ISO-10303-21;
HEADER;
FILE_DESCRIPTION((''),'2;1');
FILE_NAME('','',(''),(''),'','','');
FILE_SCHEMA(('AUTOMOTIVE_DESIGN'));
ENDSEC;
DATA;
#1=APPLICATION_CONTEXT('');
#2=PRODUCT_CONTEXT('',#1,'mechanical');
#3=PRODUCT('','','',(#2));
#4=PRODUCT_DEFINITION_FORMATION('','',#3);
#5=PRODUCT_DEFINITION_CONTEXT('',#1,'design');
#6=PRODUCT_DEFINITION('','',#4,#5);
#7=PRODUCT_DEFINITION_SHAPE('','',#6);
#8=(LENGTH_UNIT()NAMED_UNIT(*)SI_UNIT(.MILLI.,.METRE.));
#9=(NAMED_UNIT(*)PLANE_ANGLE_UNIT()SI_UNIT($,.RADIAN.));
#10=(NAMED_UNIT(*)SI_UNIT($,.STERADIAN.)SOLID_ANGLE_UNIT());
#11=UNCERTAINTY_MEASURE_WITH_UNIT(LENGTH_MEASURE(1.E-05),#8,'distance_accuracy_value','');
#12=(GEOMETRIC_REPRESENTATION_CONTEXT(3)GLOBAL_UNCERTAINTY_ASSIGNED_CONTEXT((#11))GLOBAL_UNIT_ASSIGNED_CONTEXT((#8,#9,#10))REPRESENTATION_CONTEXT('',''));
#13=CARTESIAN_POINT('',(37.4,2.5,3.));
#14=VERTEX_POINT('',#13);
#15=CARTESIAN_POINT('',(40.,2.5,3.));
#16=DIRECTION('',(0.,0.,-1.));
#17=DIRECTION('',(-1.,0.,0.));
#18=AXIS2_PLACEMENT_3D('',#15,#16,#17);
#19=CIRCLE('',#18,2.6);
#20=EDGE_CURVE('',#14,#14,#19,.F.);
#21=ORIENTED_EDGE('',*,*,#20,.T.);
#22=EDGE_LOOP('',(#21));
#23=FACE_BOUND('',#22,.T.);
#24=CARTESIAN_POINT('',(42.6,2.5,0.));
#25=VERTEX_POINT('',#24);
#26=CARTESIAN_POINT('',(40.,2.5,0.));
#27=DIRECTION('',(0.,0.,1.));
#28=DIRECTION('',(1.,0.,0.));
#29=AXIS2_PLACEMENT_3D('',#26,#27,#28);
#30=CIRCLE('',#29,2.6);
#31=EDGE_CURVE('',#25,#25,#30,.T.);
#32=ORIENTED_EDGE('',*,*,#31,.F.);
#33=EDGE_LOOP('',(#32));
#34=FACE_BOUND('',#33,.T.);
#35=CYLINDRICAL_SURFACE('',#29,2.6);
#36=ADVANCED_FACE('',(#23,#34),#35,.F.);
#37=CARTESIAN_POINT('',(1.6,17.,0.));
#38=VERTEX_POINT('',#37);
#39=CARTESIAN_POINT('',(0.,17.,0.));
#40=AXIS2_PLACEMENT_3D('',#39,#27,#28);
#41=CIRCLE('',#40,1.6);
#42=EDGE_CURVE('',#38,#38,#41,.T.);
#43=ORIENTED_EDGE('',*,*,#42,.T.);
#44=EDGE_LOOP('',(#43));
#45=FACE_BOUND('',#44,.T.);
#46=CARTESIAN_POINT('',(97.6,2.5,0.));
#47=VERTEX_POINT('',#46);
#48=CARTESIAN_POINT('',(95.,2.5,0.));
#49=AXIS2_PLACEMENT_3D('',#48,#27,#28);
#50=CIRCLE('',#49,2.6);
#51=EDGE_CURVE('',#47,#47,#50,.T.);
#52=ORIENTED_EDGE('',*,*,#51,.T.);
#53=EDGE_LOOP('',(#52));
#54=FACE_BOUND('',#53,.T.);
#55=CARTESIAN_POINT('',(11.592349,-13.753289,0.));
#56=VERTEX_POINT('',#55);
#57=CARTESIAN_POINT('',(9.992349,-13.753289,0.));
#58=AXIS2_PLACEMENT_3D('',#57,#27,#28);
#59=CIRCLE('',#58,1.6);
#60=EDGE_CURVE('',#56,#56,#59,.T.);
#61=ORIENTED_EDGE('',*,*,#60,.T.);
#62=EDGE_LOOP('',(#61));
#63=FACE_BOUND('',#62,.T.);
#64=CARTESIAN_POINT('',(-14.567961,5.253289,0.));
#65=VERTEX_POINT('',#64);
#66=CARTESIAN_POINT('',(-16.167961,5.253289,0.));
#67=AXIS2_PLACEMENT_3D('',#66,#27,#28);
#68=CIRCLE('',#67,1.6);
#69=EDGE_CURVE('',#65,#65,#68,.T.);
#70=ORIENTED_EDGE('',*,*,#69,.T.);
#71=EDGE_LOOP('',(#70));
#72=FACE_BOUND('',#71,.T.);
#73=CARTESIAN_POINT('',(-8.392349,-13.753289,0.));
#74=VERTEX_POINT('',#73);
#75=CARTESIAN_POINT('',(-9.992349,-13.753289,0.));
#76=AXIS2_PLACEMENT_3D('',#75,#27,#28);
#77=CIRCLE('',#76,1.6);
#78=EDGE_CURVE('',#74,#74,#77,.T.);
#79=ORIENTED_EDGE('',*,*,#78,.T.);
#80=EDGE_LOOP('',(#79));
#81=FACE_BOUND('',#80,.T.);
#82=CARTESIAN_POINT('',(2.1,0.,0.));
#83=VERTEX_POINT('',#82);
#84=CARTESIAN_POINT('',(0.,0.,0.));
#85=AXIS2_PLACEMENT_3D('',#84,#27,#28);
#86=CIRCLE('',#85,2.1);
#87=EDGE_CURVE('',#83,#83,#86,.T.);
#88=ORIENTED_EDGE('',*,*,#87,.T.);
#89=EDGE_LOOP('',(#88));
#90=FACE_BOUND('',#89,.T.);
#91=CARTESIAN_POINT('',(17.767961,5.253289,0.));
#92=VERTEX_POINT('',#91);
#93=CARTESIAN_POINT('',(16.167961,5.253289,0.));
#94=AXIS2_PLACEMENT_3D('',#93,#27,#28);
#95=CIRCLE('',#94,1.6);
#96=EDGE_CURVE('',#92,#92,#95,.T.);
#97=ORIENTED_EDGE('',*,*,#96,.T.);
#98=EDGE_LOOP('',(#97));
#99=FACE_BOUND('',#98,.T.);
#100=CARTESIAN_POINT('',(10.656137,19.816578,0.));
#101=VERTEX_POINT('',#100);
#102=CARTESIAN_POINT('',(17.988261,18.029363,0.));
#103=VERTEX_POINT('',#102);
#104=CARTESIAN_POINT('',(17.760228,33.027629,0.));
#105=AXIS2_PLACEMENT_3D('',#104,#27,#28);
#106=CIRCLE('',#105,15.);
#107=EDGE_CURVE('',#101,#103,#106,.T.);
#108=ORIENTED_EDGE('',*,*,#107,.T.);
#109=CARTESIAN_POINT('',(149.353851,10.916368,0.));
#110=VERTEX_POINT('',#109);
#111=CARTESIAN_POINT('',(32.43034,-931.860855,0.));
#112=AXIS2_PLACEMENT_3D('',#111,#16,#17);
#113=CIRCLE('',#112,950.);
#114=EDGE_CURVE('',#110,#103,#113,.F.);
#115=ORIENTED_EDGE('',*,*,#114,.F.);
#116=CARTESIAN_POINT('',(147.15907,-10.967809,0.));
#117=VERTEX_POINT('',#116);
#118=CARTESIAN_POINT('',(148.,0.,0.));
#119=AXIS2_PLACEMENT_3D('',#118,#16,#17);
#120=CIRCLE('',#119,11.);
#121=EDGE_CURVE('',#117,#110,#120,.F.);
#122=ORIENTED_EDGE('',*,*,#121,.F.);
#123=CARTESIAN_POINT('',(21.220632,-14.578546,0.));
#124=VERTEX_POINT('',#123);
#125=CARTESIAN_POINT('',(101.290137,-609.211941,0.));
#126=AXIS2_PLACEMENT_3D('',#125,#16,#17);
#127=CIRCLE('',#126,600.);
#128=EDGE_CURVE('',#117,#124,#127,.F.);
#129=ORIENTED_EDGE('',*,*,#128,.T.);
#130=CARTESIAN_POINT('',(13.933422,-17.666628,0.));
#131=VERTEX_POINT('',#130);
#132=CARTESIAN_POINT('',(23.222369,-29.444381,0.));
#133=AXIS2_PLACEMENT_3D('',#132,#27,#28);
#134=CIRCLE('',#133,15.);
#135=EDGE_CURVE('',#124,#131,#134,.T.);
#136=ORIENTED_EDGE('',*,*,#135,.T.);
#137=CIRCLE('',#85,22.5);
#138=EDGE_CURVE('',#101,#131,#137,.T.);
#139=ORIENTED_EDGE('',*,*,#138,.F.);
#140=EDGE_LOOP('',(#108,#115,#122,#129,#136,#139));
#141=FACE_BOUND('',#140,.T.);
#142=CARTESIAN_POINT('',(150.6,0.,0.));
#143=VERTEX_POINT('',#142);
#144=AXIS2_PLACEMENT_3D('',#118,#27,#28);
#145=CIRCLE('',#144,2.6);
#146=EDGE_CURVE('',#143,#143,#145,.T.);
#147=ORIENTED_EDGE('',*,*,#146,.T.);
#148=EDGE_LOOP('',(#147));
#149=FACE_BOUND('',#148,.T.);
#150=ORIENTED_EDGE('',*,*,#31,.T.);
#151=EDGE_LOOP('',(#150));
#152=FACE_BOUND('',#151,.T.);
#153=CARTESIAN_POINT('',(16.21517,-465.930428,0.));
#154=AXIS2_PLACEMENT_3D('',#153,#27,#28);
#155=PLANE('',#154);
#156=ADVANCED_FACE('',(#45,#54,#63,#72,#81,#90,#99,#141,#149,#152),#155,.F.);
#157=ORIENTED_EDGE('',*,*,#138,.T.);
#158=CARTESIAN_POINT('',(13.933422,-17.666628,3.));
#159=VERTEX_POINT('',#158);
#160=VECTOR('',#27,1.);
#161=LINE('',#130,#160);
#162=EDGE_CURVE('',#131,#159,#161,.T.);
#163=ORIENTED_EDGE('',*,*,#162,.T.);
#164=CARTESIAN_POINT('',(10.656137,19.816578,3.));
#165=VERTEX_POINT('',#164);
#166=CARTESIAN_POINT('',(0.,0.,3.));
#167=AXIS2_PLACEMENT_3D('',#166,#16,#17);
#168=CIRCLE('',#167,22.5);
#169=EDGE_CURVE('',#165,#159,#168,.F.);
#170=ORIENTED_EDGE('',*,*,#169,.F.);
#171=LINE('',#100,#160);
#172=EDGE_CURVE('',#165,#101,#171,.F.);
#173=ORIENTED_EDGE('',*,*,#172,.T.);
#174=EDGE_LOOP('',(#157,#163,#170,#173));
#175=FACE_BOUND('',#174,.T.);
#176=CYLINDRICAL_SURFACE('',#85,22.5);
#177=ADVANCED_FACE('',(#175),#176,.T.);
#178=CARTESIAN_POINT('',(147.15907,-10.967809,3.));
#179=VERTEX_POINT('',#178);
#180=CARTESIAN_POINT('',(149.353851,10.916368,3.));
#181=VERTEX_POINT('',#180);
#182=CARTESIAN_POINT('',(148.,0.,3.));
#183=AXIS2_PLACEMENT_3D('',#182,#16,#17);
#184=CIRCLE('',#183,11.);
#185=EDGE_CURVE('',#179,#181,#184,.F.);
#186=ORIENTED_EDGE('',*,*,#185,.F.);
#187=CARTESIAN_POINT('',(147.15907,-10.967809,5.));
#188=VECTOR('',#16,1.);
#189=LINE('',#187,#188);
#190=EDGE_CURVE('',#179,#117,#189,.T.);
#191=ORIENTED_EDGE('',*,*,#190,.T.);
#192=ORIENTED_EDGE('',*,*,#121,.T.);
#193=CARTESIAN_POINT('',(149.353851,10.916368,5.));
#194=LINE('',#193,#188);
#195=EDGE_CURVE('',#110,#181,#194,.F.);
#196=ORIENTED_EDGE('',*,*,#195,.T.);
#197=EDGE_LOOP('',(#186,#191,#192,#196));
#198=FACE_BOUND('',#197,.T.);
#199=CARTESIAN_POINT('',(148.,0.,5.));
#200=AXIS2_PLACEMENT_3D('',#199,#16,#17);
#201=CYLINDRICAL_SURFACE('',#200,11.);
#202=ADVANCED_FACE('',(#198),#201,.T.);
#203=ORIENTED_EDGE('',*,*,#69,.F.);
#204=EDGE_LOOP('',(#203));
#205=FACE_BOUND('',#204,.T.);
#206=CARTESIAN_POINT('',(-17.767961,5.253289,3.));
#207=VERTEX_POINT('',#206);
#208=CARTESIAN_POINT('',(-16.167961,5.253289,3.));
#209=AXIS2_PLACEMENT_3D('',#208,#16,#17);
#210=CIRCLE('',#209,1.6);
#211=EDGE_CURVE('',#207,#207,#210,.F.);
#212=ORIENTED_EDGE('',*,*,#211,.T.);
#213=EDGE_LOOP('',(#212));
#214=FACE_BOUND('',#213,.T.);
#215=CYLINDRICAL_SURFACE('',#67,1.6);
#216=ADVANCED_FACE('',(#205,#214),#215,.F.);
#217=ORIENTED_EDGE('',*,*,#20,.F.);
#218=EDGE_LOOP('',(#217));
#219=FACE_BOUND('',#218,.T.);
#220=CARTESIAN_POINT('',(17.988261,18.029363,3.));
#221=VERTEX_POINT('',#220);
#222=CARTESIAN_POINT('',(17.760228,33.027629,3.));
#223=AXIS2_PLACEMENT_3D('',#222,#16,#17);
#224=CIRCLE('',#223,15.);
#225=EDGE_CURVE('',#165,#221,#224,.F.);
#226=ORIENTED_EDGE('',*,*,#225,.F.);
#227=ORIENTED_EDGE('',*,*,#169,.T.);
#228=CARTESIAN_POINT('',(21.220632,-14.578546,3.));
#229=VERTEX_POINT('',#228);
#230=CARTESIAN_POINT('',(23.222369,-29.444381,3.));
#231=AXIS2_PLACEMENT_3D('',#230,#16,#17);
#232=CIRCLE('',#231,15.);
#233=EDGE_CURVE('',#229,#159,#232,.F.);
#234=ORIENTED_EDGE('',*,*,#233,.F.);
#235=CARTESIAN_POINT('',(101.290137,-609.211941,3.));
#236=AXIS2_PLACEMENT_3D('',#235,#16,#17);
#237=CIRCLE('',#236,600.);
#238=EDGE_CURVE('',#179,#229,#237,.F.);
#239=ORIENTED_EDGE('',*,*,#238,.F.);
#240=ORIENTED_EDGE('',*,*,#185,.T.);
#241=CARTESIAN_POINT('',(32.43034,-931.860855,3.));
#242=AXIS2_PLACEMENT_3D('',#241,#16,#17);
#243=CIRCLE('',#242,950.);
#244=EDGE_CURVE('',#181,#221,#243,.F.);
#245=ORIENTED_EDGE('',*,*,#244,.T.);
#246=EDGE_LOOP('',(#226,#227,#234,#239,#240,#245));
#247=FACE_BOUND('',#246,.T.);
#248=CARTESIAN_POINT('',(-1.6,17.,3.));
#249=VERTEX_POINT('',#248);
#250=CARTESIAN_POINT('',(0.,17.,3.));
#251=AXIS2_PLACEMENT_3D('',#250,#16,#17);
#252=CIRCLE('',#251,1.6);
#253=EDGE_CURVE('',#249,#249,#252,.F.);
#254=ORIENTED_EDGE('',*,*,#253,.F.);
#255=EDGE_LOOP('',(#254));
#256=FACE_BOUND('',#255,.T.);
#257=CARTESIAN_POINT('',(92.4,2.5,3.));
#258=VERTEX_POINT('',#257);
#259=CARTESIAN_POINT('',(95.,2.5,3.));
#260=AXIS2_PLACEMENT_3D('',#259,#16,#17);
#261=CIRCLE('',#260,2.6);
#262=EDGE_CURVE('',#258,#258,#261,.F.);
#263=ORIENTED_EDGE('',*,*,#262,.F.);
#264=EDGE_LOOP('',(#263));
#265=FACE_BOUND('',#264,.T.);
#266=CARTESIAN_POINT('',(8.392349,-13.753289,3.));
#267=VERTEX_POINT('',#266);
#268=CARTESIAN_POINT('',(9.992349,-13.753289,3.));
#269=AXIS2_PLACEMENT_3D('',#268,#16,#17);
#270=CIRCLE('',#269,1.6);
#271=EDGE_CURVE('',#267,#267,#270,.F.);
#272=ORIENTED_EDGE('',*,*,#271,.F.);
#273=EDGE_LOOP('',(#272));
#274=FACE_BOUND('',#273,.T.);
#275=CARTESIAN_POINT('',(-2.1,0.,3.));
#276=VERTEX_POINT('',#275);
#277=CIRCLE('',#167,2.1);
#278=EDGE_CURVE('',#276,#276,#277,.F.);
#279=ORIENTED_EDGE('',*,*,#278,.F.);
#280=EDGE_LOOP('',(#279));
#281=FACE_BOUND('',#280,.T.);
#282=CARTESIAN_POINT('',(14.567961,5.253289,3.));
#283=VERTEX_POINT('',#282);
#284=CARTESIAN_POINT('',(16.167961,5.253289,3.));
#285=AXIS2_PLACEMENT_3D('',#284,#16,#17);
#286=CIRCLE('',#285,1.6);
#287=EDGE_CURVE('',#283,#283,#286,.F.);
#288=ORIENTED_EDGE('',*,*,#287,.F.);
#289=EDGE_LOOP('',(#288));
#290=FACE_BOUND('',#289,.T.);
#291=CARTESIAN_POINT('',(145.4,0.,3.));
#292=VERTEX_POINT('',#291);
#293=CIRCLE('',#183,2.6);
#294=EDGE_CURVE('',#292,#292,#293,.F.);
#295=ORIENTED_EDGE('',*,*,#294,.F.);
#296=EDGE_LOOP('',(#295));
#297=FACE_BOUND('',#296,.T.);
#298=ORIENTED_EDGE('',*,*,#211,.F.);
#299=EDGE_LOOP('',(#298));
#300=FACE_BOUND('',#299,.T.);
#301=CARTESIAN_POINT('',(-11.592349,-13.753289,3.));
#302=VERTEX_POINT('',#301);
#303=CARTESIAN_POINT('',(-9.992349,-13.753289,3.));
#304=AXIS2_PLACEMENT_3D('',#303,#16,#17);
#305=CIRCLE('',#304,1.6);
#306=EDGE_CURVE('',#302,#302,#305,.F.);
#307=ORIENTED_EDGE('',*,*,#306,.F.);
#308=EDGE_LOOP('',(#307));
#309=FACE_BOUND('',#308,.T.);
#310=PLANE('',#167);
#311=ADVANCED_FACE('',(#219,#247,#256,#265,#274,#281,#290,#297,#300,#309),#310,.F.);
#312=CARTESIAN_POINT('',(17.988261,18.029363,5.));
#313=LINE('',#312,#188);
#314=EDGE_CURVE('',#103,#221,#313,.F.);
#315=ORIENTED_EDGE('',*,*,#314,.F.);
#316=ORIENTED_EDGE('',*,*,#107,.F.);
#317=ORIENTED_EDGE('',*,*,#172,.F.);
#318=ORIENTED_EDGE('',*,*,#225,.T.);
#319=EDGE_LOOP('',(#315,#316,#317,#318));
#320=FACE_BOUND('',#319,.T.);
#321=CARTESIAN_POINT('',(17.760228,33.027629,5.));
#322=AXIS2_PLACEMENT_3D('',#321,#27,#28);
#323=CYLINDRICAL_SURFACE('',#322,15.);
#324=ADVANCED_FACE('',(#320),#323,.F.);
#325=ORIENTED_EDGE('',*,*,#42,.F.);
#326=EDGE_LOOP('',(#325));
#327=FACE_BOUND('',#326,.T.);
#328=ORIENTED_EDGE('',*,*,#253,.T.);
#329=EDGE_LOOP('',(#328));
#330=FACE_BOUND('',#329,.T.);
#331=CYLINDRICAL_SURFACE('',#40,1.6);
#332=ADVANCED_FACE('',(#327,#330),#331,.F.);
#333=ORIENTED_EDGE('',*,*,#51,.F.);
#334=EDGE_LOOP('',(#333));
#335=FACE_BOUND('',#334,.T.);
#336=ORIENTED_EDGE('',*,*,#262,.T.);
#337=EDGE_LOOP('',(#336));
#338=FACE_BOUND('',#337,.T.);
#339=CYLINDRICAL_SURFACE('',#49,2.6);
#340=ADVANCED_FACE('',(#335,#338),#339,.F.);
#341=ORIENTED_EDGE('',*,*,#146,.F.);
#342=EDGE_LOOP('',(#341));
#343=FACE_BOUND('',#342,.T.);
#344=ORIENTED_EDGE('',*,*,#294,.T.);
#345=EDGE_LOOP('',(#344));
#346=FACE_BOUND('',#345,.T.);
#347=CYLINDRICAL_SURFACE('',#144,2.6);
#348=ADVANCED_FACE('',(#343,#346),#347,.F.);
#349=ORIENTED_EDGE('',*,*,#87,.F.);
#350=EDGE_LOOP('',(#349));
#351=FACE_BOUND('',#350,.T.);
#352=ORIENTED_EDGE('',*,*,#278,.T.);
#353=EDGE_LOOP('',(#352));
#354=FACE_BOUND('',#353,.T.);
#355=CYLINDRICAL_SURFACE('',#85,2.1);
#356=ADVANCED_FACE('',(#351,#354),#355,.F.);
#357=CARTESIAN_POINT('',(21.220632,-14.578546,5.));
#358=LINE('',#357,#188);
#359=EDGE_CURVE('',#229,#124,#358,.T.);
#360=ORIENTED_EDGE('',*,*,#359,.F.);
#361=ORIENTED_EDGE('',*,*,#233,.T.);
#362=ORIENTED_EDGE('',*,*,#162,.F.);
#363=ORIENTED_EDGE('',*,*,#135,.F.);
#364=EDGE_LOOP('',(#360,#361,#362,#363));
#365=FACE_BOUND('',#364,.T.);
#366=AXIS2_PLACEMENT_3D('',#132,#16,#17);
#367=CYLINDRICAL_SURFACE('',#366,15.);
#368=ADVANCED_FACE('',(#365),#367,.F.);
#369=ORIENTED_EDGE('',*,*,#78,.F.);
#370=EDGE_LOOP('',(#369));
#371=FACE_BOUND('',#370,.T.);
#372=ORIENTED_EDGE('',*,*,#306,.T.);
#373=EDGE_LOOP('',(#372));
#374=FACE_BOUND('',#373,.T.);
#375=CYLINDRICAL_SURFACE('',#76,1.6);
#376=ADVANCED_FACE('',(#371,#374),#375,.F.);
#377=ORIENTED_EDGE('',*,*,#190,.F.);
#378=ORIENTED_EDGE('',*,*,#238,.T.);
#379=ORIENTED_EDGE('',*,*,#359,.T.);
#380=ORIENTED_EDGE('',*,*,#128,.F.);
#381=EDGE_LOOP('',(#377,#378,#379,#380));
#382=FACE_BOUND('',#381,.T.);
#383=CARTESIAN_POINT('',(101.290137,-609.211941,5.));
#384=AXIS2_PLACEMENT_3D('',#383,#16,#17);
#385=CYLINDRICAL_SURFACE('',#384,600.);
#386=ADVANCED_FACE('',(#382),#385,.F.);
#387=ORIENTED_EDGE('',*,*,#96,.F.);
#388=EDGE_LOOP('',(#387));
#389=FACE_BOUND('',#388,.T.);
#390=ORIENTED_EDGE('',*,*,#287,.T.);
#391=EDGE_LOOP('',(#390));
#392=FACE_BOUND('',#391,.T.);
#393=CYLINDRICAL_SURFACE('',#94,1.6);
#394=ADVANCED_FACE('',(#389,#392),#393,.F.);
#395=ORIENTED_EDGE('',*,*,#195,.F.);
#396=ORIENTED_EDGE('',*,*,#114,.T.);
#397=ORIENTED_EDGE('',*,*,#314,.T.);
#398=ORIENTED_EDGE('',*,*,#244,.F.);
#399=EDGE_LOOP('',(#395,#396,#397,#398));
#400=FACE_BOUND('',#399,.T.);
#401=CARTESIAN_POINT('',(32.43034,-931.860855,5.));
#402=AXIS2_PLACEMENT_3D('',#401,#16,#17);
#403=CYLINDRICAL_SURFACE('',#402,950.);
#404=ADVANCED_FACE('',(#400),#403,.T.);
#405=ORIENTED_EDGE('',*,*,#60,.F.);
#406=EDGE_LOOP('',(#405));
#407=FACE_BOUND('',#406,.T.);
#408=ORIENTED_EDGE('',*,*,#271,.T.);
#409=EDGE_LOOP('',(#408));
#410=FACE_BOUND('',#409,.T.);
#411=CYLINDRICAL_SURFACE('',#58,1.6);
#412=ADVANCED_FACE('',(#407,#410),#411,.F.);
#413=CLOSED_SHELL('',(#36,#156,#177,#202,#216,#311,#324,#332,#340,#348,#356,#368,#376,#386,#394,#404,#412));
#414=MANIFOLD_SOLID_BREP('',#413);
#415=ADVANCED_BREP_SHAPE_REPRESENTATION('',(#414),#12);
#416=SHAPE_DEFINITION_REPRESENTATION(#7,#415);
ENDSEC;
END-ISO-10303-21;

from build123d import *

# Parameters (mm, degrees)
BOSS_EXTRUDE1_START     = -5
BOSS_EXTRUDE1_OUTLINE_R = 1.925
BOSS_EXTRUDE1_DEPTH     = 5
SKETCH4_R               = 1.6
CUT_EXTRUDE2_DEPTH      = 161.661912101
FILLET1_R               = 15
SKETCH5_R               = 2.1
SKETCH5_R_2             = 2.6
CUT_EXTRUDE4_DEPTH      = 161.661912218
SKETCH6_W               = 233.09675901
SKETCH6_H               = 87.107773224
CUT_EXTRUDE5_DEPTH      = 2


with BuildPart() as part:
    # Boss-Extrude1: read off the stored shape, not the designer's step
    # Boss-Extrude1 outline → Boss-Extrude1 (new body)
    with BuildSketch(Plane.XY.offset(5).offset(BOSS_EXTRUDE1_START)):
        with BuildLine():
            ThreePointArc((149.353851183, 10.916367847), (81.584978704, 16.866619507), (13.564040933, 17.951790818))
            ThreePointArc((13.564040933, 17.951790818), (-22.408339146, -2.028875729), (16.567779435, -15.223622585))
            ThreePointArc((16.567779435, -15.223622585), (81.747231754, -9.530296146), (147.159069574, -10.96780908))
            ThreePointArc((147.159069574, -10.96780908), (158.945093507, -1.097692183), (149.353851183, 10.916367847))
        make_face()
        with Locations((40, 2.5)):
            Circle(BOSS_EXTRUDE1_OUTLINE_R, mode=Mode.SUBTRACT)
        with Locations((95, 2.5)):
            Circle(BOSS_EXTRUDE1_OUTLINE_R, mode=Mode.SUBTRACT)
    extrude(amount=BOSS_EXTRUDE1_DEPTH)

    # Sketch4 → Cut-Extrude2 (cut, through all)
    with BuildSketch(Plane.XY.offset(5)):
        with Locations((0, 17)):
            Circle(SKETCH4_R)
        with Locations((16.167960777, 5.253288904)):
            Circle(SKETCH4_R)
        with Locations((9.992349289, -13.753288904)):
            Circle(SKETCH4_R)
        with Locations((-9.992349289, -13.753288904)):
            Circle(SKETCH4_R)
        with Locations((-16.167960777, 5.253288904)):
            Circle(SKETCH4_R)
    extrude(amount=-CUT_EXTRUDE2_DEPTH, mode=Mode.SUBTRACT)

    # Fillet1
    fillet1_edges = [part.edges().sort_by_distance(p)[0] for p in [
        (16.567779435, -15.223622585, 2.5),
        (13.564040933, 17.951790818, 2.5),
    ]]
    fillet(fillet1_edges, radius=FILLET1_R)

    # Sketch5 → Cut-Extrude4 (cut, through all)
    with BuildSketch(Plane.XY.offset(5)):
        Circle(SKETCH5_R)
        with Locations((148, 0)):
            Circle(SKETCH5_R_2)
        with Locations((95, 2.5)):
            Circle(SKETCH5_R_2)
        with Locations((40, 2.5)):
            Circle(SKETCH5_R_2)
    extrude(amount=-CUT_EXTRUDE4_DEPTH, mode=Mode.SUBTRACT)

    # Sketch6 → Cut-Extrude5 (cut)
    with BuildSketch(Plane.XY.offset(5)):
        with Locations((68.481602645, 0)):
            Rectangle(SKETCH6_W, SKETCH6_H)
    extrude(amount=-CUT_EXTRUDE5_DEPTH, mode=Mode.SUBTRACT)


solid = part.part
